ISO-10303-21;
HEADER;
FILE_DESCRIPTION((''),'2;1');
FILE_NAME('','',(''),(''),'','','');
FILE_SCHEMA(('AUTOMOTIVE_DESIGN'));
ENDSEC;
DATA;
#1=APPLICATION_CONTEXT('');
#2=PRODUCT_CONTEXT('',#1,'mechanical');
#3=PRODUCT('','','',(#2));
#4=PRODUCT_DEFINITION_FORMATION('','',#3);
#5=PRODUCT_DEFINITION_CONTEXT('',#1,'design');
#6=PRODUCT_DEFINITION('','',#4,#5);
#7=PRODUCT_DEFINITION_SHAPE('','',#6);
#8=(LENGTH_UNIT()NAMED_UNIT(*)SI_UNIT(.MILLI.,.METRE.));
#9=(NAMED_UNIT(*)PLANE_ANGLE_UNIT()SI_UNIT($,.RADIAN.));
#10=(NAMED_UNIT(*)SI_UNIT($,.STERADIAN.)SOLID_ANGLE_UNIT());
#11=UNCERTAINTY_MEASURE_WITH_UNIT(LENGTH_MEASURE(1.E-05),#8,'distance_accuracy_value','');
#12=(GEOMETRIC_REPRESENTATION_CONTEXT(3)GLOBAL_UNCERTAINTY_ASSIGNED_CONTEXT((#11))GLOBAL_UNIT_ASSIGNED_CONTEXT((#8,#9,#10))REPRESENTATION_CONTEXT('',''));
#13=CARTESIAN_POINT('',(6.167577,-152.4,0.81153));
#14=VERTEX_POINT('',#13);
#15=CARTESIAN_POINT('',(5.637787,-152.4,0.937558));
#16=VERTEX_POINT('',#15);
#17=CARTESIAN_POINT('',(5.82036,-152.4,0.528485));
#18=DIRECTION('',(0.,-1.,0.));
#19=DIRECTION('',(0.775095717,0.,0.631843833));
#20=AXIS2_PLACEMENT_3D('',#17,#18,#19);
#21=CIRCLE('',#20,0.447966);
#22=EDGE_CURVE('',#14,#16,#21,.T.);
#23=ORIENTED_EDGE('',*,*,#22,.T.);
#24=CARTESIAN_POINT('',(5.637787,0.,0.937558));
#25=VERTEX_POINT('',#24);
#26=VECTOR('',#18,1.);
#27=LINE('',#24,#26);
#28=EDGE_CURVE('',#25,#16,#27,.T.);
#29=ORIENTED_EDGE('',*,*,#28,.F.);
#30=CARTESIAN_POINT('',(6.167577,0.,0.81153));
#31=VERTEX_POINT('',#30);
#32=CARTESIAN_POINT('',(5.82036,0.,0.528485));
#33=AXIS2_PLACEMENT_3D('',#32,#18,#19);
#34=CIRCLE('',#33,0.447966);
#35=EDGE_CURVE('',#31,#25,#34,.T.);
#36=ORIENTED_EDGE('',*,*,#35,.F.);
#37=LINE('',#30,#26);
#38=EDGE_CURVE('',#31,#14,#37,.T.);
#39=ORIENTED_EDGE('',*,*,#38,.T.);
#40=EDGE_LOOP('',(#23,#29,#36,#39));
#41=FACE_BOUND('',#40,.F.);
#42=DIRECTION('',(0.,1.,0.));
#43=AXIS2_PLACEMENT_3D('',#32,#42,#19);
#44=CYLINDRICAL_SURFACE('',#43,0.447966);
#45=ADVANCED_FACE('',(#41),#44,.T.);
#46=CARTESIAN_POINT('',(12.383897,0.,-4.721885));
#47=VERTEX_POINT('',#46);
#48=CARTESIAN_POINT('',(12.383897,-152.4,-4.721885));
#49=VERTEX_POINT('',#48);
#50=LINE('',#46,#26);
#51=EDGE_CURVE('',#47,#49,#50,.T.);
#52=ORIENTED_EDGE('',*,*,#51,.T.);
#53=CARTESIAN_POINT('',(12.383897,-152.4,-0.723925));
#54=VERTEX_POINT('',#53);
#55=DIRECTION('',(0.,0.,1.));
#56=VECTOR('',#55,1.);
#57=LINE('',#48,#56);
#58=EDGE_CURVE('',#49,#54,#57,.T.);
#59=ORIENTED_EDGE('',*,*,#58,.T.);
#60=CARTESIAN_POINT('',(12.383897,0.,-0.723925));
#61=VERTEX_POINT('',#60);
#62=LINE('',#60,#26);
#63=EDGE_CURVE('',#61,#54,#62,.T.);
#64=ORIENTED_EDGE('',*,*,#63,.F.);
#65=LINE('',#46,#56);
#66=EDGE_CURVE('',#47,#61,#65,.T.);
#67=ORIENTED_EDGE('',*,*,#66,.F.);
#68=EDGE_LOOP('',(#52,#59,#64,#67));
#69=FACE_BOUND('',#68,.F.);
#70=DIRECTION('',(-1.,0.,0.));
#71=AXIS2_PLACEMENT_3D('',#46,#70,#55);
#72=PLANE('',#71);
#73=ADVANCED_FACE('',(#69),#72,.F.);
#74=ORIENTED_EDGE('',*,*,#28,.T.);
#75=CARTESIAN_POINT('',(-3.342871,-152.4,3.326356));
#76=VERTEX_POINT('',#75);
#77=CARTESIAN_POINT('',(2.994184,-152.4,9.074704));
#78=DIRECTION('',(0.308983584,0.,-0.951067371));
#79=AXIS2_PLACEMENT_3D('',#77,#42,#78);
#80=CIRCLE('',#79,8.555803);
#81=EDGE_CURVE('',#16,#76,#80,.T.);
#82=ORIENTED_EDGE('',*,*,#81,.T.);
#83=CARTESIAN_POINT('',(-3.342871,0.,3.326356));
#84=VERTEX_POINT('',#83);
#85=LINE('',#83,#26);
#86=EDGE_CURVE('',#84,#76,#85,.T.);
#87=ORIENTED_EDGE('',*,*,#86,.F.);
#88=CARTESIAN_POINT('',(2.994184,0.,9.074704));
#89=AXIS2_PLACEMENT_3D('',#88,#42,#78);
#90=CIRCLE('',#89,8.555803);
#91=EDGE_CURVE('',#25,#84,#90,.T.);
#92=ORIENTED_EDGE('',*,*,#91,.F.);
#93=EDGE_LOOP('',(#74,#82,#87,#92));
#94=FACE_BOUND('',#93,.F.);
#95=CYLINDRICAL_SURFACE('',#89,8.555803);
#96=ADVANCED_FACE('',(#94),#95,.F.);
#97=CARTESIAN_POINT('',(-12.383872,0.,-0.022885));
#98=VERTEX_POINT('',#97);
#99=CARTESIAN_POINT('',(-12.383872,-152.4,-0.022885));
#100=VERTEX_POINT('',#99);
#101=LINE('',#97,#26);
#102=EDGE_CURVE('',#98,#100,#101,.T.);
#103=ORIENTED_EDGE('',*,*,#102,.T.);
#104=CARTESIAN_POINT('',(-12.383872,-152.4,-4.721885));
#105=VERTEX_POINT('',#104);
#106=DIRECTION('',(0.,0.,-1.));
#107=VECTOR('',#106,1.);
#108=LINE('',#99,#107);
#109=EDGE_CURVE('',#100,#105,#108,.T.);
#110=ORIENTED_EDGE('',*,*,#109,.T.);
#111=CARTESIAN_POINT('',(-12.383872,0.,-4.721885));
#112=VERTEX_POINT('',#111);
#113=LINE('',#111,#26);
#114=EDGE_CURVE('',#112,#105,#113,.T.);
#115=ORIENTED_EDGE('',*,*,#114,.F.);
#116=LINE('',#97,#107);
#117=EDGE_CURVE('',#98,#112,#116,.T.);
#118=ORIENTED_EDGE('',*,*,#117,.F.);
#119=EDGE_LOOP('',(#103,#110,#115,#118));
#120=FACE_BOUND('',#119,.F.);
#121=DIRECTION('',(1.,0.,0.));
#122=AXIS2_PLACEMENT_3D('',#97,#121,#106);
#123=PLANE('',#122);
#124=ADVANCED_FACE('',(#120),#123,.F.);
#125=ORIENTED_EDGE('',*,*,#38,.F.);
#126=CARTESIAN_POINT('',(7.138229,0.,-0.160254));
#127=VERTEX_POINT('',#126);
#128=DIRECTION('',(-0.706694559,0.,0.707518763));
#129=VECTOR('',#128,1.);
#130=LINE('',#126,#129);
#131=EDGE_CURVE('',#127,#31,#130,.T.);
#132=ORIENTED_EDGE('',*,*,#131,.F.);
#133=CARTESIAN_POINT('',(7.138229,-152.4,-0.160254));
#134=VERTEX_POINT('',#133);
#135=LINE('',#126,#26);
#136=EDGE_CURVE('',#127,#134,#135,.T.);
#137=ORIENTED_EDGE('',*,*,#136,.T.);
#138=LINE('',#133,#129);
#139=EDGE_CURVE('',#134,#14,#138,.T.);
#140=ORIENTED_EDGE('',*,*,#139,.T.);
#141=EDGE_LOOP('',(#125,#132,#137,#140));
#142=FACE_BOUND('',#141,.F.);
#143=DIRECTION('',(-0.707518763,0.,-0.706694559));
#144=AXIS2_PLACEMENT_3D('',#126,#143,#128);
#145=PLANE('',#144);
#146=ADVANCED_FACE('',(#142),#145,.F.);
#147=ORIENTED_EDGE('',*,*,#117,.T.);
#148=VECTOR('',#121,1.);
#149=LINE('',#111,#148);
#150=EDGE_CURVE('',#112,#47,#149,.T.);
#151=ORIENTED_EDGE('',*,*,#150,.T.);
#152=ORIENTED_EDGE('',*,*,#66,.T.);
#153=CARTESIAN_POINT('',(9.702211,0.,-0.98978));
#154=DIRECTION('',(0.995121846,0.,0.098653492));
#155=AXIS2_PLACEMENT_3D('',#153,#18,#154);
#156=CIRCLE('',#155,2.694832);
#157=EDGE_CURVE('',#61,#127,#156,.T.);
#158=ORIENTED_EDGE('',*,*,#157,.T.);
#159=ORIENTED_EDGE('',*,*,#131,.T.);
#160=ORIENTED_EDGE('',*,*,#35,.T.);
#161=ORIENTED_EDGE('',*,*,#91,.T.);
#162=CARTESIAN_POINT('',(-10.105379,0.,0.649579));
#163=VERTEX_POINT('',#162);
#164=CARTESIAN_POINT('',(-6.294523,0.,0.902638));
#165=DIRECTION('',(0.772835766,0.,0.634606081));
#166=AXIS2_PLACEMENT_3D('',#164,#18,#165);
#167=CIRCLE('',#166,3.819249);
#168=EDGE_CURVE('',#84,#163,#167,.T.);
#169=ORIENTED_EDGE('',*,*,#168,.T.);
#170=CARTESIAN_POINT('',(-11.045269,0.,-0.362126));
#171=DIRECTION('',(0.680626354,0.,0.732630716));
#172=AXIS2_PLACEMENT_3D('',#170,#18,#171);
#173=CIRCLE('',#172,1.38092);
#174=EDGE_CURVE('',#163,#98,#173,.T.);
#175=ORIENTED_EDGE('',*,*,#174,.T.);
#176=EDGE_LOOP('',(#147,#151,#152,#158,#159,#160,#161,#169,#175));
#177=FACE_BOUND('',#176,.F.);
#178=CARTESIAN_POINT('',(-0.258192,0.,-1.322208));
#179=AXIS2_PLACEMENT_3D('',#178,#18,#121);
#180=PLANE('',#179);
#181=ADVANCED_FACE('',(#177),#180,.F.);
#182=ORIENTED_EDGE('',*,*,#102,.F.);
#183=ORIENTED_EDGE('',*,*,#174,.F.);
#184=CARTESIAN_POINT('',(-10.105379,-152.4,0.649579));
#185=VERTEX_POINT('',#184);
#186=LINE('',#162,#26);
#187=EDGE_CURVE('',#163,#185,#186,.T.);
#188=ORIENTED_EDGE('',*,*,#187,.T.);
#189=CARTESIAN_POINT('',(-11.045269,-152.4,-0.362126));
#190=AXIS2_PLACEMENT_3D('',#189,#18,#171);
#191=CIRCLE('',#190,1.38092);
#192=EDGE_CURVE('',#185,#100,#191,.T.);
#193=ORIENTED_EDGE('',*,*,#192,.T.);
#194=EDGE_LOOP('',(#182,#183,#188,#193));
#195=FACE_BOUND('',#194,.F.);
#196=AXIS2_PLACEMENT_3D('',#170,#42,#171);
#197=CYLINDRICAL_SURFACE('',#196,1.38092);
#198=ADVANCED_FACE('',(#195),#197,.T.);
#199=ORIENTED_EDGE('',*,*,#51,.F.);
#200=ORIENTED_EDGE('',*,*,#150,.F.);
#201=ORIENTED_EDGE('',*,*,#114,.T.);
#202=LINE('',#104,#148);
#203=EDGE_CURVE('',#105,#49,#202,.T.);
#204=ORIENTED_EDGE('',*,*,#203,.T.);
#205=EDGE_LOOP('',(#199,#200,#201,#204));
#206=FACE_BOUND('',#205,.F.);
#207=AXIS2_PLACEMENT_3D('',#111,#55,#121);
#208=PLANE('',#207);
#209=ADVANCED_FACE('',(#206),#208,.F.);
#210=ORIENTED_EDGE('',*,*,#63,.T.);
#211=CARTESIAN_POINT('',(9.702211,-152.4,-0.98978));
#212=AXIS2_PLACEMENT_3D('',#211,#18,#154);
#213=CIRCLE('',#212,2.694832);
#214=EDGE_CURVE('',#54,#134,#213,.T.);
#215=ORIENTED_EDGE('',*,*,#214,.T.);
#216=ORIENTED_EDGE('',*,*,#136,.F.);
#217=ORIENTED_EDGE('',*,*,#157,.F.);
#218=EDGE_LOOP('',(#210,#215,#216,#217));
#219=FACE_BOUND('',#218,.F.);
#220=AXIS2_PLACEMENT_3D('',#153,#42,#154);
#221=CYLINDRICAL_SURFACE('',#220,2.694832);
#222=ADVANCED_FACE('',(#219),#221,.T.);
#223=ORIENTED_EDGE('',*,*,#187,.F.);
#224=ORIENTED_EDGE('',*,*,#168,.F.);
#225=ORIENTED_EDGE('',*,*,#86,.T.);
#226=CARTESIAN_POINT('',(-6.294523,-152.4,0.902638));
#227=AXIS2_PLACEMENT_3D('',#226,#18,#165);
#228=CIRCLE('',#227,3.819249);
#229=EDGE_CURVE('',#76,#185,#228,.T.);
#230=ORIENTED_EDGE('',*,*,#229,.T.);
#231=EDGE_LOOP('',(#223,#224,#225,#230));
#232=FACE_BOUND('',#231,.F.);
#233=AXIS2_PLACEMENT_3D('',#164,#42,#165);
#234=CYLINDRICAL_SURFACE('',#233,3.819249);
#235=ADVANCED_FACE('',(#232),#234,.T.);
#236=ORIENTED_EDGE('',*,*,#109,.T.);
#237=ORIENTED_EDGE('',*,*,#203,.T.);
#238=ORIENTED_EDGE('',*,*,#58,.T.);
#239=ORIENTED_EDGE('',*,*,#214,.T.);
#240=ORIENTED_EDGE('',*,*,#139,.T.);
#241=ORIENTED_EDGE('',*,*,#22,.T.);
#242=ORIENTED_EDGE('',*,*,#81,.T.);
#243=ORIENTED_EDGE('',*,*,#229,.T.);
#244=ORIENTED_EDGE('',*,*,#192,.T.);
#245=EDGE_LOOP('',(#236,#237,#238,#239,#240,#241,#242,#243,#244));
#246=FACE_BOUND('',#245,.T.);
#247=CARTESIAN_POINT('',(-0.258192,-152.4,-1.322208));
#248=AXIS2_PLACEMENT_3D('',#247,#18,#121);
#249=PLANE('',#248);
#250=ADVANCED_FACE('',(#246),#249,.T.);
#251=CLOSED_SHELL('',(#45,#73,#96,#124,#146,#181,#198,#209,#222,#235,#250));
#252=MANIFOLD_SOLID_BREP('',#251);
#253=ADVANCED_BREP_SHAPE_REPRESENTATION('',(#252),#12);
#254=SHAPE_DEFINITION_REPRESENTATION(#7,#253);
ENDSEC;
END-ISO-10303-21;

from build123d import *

# Parameters (mm, degrees)
F1_DEPTH = 152.4


# Not quite as in the source:
# - ends of sketch curves that miss each other by under 0.0002 mm in the source are joined


with BuildPart() as f1:
    # F0 (on Front) → F1 (new body)
    with BuildSketch(Plane.XZ):
        with BuildLine():
            Line((-12.3838716, -0.0228854), (-12.3838716, -4.7218854))
            Line((-12.3838716, -4.7218854), (12.383897, -4.7218854))
            Line((12.383897, -4.7218854), (12.383897, -0.7239254))
            ThreePointArc((12.383897, -0.7239254), (9.9901302454, 1.6896267796), (7.1382289827, -0.1602538356))
            Line((7.1382289827, -0.1602538356), (6.1675772, 0.81153))
            ThreePointArc((6.1675772, 0.81153), (5.9240303947, 0.9642906727), (5.6377868977, 0.9375583076))
            ThreePointArc((5.6377868977, 0.9375583076), (0.7948702497, 0.8064034512), (-3.3428712434, 3.3263562022))
            ThreePointArc((-3.3428712434, 3.3263562022), (-7.7001712998, 4.4538085328), (-10.1053789302, 0.6495786484))
            ThreePointArc((-10.1053789302, 0.6495786484), (-11.4361565644, 0.9623164645), (-12.3838716, -0.0228854))
        make_face()
    extrude(amount=F1_DEPTH)


solid = f1.part
